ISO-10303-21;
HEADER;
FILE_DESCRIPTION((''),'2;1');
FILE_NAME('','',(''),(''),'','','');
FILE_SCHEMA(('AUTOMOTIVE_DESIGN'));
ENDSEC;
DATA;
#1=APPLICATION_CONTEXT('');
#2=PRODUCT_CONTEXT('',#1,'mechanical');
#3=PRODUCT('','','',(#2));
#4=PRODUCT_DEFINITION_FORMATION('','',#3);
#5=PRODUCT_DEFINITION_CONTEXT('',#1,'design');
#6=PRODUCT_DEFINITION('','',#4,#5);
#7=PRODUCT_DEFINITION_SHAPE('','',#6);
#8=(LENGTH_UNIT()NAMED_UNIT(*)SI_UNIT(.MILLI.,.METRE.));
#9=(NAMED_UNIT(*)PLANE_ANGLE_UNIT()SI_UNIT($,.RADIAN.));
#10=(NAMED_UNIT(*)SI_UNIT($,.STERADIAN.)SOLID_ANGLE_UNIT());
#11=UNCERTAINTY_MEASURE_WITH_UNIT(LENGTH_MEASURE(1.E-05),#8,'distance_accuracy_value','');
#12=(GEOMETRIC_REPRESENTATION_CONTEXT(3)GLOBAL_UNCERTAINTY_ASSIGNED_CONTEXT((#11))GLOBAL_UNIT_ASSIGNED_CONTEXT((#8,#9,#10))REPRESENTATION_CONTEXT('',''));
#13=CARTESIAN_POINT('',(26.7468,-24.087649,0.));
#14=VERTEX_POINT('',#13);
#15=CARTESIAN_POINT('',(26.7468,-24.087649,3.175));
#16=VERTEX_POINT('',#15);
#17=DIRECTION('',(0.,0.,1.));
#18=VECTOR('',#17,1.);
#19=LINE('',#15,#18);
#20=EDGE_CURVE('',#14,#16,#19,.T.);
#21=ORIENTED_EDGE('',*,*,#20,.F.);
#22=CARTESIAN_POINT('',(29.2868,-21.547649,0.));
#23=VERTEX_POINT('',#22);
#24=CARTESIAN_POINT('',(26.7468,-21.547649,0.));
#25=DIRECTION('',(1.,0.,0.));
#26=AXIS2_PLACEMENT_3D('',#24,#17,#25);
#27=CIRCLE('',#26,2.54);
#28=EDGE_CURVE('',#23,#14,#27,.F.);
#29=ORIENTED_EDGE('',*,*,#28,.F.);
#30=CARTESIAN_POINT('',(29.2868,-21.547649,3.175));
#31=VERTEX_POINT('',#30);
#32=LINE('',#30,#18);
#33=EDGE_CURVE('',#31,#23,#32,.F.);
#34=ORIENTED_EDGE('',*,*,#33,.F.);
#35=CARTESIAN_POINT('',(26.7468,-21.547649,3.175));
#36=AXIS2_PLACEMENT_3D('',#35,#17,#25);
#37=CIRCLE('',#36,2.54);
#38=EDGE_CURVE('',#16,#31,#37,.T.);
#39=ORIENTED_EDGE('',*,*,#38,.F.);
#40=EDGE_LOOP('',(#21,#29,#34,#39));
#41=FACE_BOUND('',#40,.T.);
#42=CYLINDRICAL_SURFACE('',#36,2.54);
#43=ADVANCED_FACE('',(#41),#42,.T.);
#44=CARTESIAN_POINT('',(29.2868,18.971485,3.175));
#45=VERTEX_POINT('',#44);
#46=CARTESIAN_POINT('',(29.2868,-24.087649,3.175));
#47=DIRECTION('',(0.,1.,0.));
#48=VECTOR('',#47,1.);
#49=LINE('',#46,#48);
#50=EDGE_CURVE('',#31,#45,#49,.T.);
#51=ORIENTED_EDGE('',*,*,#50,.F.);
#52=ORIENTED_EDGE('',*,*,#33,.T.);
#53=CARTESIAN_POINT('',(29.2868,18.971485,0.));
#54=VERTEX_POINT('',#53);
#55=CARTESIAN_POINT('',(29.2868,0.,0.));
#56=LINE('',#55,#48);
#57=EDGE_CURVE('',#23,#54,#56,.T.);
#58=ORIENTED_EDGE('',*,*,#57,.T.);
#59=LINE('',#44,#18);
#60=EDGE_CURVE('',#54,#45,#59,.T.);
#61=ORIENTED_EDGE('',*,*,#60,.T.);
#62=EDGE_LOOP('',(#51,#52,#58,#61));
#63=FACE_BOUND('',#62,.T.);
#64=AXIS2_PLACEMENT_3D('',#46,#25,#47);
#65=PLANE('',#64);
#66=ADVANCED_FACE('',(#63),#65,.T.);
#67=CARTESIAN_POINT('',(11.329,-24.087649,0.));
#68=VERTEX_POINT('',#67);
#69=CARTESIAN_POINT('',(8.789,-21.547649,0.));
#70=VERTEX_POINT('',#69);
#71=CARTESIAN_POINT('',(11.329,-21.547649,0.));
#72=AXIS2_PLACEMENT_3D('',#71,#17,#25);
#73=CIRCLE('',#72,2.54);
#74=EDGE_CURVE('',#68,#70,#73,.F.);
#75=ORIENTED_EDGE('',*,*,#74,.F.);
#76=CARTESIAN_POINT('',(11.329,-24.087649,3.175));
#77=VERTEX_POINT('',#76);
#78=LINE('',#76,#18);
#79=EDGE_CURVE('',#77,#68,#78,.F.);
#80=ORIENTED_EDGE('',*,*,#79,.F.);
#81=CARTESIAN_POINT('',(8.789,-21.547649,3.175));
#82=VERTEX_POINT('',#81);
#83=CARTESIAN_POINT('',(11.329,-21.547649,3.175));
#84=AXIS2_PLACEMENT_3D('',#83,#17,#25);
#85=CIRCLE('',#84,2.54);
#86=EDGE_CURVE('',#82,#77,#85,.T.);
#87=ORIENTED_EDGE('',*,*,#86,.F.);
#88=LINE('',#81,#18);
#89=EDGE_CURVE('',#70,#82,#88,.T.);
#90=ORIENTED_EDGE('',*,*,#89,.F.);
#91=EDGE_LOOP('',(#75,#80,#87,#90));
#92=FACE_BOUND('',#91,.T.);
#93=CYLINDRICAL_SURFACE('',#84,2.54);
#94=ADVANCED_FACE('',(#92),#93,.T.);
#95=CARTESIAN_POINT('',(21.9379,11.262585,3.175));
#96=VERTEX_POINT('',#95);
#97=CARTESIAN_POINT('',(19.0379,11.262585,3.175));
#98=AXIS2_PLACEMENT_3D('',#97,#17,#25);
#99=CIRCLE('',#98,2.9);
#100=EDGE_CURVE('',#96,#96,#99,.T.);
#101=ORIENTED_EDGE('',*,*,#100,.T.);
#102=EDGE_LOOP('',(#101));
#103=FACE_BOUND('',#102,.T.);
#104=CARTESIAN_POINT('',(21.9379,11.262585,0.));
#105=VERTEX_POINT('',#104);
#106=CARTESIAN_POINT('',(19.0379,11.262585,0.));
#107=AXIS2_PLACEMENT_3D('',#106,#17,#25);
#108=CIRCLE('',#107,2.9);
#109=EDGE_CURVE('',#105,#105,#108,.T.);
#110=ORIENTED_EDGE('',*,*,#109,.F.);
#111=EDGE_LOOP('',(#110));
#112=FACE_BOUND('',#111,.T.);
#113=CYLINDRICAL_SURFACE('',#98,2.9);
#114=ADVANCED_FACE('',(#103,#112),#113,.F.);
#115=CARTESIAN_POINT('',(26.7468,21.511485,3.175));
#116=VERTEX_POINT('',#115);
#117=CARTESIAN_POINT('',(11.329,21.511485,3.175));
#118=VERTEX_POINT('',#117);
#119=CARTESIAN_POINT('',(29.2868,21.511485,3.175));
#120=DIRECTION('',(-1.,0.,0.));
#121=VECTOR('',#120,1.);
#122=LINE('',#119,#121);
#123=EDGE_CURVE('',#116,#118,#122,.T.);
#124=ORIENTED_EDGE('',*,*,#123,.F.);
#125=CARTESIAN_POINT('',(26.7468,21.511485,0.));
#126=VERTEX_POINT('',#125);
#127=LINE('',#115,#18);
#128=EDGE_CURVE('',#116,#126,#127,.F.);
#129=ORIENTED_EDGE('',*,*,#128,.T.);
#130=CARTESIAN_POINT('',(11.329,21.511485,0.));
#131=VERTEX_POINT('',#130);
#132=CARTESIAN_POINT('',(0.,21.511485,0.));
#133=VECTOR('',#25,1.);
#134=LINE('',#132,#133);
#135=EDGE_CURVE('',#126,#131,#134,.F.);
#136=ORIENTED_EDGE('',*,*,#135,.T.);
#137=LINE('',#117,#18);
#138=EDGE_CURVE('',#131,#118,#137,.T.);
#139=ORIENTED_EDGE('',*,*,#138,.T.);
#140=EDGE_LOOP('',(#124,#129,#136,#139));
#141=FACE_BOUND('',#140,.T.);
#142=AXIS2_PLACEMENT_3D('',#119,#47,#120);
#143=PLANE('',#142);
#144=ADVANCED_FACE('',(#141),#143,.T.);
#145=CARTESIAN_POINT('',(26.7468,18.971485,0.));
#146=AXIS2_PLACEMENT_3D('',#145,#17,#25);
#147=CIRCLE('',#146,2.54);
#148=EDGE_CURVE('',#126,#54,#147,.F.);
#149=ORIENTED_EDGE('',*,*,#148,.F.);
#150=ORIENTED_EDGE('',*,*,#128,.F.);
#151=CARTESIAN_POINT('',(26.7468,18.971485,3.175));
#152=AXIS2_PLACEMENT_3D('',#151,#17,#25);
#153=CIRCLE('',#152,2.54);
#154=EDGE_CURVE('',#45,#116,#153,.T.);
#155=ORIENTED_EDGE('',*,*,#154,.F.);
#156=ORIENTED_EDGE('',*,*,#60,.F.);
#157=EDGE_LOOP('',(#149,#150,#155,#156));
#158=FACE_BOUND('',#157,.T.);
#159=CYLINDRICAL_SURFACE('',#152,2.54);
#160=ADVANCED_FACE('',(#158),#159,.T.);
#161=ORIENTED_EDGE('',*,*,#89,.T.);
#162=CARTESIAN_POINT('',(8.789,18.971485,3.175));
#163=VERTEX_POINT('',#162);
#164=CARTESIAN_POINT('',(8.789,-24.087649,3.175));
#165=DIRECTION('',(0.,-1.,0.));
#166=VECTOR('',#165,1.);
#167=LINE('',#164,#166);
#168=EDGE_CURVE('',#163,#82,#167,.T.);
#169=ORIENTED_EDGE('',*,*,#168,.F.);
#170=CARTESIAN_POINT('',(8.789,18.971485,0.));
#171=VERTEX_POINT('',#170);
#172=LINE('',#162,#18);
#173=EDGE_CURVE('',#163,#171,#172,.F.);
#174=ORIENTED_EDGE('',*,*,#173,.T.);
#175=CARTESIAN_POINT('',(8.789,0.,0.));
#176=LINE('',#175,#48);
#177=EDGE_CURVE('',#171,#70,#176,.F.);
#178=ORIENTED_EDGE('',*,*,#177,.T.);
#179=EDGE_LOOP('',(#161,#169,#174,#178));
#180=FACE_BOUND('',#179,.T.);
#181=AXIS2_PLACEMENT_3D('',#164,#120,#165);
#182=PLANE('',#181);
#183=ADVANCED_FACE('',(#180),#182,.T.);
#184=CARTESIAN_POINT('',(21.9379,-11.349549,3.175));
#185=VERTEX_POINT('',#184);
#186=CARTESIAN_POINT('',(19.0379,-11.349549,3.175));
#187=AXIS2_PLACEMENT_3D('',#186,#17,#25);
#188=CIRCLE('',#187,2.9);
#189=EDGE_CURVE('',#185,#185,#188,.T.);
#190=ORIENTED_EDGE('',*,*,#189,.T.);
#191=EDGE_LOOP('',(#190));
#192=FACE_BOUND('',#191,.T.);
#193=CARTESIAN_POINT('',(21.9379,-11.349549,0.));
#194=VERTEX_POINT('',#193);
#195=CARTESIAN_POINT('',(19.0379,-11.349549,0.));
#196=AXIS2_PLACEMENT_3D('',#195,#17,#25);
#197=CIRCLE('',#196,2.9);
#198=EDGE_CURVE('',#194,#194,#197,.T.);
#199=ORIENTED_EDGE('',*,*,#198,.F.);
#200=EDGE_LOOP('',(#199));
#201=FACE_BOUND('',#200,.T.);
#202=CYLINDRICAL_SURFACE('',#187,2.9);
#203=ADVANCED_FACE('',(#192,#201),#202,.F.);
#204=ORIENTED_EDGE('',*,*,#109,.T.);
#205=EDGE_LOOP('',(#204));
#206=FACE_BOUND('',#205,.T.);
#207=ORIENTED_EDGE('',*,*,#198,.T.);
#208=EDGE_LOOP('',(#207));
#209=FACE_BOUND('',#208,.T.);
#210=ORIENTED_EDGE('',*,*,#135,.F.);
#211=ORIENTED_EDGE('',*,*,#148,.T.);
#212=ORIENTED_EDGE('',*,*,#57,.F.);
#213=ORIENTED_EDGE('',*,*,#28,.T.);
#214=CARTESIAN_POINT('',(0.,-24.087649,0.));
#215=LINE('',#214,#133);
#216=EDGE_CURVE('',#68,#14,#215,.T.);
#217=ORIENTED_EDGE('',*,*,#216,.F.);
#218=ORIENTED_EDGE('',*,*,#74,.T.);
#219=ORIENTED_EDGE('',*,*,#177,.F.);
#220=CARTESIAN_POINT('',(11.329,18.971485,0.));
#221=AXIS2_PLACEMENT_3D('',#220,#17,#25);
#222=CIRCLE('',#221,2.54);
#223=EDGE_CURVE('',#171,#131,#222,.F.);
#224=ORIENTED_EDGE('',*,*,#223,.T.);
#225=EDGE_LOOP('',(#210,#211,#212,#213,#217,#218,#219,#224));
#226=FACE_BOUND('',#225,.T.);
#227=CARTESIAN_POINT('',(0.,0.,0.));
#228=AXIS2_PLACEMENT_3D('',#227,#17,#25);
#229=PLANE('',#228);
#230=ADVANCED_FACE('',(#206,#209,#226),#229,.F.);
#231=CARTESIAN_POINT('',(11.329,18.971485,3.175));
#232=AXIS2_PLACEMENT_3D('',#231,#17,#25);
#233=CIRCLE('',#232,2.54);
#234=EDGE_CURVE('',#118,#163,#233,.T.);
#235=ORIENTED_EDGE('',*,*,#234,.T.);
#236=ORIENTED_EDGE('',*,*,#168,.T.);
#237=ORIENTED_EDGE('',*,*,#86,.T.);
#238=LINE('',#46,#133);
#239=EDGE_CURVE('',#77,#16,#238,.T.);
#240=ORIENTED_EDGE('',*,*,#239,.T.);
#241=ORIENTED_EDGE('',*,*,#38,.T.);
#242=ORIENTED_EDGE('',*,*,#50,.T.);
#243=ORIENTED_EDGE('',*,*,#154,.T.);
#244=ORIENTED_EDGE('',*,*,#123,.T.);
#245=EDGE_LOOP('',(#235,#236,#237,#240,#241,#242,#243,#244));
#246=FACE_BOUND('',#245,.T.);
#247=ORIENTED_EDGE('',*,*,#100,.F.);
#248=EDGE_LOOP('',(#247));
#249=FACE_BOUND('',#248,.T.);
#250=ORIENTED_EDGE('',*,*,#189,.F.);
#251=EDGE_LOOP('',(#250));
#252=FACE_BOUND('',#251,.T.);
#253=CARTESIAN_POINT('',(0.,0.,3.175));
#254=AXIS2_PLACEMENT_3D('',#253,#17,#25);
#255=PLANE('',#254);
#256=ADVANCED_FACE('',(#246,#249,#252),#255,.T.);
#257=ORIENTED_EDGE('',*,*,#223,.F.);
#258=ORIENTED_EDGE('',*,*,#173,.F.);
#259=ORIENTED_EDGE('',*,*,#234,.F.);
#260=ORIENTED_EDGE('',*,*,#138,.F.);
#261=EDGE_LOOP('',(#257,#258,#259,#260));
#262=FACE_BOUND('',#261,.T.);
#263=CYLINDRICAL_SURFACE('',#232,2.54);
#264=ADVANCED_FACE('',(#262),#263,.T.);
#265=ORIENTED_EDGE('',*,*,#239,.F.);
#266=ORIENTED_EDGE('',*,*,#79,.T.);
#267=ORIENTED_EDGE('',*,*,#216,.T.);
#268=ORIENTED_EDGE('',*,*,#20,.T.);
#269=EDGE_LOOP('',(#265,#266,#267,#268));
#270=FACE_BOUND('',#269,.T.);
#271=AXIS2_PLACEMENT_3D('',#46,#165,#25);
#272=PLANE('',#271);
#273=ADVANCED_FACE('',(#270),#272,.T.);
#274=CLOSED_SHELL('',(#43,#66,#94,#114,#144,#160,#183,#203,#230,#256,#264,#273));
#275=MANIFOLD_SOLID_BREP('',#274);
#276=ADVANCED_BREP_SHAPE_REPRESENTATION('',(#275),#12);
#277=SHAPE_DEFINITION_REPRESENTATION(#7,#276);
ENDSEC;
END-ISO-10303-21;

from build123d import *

# Parameters (mm, degrees)
SKETCH1_W            = 20.4978
SKETCH1_H            = 45.599133257
SKETCH1_R            = 0.890894817
SKETCH1_R_2          = 0.963661062
BOSS_EXTRUDE1_DEPTH  = 3.175
M5_CLEARANCE_HOLE3_D = 5.8
FILLET1_R            = 2.54
M5_CLEARANCE_HOLE1_D = 5.8


with BuildPart() as part:
    # Sketch1 → Boss-Extrude1 (new body)
    with BuildSketch(Plane.XY):
        with Locations((19.037900458, -1.288082074)):
            Rectangle(SKETCH1_W, SKETCH1_H)
        with Locations((19.037900458, -11.349548702)):
            Circle(SKETCH1_R, mode=Mode.SUBTRACT)
        with Locations((19.037900458, 11.262584555)):
            Circle(SKETCH1_R_2, mode=Mode.SUBTRACT)
    extrude(amount=BOSS_EXTRUDE1_DEPTH)

    # M5 Clearance Hole3 (through all)
    with Locations(Plane.XY.offset(3.175)):
        with Locations((19.037900458, 11.262584555)):
            Hole(M5_CLEARANCE_HOLE3_D / 2)

    # Fillet1
    fillet1_edges = [part.edges().sort_by_distance(p)[0] for p in [
        (29.286800458, 21.511484555, 1.5875),
        (29.286800458, -24.087648702, 1.5875),
        (8.789000458, -24.087648702, 1.5875),
        (8.789000458, 21.511484555, 1.5875),
    ]]
    fillet(fillet1_edges, radius=FILLET1_R)

    # M5 Clearance Hole1 (through all)
    with Locations(Plane.XY.offset(3.175)):
        with Locations((19.037900458, -11.349548702)):
            Hole(M5_CLEARANCE_HOLE1_D / 2)


solid = part.part
